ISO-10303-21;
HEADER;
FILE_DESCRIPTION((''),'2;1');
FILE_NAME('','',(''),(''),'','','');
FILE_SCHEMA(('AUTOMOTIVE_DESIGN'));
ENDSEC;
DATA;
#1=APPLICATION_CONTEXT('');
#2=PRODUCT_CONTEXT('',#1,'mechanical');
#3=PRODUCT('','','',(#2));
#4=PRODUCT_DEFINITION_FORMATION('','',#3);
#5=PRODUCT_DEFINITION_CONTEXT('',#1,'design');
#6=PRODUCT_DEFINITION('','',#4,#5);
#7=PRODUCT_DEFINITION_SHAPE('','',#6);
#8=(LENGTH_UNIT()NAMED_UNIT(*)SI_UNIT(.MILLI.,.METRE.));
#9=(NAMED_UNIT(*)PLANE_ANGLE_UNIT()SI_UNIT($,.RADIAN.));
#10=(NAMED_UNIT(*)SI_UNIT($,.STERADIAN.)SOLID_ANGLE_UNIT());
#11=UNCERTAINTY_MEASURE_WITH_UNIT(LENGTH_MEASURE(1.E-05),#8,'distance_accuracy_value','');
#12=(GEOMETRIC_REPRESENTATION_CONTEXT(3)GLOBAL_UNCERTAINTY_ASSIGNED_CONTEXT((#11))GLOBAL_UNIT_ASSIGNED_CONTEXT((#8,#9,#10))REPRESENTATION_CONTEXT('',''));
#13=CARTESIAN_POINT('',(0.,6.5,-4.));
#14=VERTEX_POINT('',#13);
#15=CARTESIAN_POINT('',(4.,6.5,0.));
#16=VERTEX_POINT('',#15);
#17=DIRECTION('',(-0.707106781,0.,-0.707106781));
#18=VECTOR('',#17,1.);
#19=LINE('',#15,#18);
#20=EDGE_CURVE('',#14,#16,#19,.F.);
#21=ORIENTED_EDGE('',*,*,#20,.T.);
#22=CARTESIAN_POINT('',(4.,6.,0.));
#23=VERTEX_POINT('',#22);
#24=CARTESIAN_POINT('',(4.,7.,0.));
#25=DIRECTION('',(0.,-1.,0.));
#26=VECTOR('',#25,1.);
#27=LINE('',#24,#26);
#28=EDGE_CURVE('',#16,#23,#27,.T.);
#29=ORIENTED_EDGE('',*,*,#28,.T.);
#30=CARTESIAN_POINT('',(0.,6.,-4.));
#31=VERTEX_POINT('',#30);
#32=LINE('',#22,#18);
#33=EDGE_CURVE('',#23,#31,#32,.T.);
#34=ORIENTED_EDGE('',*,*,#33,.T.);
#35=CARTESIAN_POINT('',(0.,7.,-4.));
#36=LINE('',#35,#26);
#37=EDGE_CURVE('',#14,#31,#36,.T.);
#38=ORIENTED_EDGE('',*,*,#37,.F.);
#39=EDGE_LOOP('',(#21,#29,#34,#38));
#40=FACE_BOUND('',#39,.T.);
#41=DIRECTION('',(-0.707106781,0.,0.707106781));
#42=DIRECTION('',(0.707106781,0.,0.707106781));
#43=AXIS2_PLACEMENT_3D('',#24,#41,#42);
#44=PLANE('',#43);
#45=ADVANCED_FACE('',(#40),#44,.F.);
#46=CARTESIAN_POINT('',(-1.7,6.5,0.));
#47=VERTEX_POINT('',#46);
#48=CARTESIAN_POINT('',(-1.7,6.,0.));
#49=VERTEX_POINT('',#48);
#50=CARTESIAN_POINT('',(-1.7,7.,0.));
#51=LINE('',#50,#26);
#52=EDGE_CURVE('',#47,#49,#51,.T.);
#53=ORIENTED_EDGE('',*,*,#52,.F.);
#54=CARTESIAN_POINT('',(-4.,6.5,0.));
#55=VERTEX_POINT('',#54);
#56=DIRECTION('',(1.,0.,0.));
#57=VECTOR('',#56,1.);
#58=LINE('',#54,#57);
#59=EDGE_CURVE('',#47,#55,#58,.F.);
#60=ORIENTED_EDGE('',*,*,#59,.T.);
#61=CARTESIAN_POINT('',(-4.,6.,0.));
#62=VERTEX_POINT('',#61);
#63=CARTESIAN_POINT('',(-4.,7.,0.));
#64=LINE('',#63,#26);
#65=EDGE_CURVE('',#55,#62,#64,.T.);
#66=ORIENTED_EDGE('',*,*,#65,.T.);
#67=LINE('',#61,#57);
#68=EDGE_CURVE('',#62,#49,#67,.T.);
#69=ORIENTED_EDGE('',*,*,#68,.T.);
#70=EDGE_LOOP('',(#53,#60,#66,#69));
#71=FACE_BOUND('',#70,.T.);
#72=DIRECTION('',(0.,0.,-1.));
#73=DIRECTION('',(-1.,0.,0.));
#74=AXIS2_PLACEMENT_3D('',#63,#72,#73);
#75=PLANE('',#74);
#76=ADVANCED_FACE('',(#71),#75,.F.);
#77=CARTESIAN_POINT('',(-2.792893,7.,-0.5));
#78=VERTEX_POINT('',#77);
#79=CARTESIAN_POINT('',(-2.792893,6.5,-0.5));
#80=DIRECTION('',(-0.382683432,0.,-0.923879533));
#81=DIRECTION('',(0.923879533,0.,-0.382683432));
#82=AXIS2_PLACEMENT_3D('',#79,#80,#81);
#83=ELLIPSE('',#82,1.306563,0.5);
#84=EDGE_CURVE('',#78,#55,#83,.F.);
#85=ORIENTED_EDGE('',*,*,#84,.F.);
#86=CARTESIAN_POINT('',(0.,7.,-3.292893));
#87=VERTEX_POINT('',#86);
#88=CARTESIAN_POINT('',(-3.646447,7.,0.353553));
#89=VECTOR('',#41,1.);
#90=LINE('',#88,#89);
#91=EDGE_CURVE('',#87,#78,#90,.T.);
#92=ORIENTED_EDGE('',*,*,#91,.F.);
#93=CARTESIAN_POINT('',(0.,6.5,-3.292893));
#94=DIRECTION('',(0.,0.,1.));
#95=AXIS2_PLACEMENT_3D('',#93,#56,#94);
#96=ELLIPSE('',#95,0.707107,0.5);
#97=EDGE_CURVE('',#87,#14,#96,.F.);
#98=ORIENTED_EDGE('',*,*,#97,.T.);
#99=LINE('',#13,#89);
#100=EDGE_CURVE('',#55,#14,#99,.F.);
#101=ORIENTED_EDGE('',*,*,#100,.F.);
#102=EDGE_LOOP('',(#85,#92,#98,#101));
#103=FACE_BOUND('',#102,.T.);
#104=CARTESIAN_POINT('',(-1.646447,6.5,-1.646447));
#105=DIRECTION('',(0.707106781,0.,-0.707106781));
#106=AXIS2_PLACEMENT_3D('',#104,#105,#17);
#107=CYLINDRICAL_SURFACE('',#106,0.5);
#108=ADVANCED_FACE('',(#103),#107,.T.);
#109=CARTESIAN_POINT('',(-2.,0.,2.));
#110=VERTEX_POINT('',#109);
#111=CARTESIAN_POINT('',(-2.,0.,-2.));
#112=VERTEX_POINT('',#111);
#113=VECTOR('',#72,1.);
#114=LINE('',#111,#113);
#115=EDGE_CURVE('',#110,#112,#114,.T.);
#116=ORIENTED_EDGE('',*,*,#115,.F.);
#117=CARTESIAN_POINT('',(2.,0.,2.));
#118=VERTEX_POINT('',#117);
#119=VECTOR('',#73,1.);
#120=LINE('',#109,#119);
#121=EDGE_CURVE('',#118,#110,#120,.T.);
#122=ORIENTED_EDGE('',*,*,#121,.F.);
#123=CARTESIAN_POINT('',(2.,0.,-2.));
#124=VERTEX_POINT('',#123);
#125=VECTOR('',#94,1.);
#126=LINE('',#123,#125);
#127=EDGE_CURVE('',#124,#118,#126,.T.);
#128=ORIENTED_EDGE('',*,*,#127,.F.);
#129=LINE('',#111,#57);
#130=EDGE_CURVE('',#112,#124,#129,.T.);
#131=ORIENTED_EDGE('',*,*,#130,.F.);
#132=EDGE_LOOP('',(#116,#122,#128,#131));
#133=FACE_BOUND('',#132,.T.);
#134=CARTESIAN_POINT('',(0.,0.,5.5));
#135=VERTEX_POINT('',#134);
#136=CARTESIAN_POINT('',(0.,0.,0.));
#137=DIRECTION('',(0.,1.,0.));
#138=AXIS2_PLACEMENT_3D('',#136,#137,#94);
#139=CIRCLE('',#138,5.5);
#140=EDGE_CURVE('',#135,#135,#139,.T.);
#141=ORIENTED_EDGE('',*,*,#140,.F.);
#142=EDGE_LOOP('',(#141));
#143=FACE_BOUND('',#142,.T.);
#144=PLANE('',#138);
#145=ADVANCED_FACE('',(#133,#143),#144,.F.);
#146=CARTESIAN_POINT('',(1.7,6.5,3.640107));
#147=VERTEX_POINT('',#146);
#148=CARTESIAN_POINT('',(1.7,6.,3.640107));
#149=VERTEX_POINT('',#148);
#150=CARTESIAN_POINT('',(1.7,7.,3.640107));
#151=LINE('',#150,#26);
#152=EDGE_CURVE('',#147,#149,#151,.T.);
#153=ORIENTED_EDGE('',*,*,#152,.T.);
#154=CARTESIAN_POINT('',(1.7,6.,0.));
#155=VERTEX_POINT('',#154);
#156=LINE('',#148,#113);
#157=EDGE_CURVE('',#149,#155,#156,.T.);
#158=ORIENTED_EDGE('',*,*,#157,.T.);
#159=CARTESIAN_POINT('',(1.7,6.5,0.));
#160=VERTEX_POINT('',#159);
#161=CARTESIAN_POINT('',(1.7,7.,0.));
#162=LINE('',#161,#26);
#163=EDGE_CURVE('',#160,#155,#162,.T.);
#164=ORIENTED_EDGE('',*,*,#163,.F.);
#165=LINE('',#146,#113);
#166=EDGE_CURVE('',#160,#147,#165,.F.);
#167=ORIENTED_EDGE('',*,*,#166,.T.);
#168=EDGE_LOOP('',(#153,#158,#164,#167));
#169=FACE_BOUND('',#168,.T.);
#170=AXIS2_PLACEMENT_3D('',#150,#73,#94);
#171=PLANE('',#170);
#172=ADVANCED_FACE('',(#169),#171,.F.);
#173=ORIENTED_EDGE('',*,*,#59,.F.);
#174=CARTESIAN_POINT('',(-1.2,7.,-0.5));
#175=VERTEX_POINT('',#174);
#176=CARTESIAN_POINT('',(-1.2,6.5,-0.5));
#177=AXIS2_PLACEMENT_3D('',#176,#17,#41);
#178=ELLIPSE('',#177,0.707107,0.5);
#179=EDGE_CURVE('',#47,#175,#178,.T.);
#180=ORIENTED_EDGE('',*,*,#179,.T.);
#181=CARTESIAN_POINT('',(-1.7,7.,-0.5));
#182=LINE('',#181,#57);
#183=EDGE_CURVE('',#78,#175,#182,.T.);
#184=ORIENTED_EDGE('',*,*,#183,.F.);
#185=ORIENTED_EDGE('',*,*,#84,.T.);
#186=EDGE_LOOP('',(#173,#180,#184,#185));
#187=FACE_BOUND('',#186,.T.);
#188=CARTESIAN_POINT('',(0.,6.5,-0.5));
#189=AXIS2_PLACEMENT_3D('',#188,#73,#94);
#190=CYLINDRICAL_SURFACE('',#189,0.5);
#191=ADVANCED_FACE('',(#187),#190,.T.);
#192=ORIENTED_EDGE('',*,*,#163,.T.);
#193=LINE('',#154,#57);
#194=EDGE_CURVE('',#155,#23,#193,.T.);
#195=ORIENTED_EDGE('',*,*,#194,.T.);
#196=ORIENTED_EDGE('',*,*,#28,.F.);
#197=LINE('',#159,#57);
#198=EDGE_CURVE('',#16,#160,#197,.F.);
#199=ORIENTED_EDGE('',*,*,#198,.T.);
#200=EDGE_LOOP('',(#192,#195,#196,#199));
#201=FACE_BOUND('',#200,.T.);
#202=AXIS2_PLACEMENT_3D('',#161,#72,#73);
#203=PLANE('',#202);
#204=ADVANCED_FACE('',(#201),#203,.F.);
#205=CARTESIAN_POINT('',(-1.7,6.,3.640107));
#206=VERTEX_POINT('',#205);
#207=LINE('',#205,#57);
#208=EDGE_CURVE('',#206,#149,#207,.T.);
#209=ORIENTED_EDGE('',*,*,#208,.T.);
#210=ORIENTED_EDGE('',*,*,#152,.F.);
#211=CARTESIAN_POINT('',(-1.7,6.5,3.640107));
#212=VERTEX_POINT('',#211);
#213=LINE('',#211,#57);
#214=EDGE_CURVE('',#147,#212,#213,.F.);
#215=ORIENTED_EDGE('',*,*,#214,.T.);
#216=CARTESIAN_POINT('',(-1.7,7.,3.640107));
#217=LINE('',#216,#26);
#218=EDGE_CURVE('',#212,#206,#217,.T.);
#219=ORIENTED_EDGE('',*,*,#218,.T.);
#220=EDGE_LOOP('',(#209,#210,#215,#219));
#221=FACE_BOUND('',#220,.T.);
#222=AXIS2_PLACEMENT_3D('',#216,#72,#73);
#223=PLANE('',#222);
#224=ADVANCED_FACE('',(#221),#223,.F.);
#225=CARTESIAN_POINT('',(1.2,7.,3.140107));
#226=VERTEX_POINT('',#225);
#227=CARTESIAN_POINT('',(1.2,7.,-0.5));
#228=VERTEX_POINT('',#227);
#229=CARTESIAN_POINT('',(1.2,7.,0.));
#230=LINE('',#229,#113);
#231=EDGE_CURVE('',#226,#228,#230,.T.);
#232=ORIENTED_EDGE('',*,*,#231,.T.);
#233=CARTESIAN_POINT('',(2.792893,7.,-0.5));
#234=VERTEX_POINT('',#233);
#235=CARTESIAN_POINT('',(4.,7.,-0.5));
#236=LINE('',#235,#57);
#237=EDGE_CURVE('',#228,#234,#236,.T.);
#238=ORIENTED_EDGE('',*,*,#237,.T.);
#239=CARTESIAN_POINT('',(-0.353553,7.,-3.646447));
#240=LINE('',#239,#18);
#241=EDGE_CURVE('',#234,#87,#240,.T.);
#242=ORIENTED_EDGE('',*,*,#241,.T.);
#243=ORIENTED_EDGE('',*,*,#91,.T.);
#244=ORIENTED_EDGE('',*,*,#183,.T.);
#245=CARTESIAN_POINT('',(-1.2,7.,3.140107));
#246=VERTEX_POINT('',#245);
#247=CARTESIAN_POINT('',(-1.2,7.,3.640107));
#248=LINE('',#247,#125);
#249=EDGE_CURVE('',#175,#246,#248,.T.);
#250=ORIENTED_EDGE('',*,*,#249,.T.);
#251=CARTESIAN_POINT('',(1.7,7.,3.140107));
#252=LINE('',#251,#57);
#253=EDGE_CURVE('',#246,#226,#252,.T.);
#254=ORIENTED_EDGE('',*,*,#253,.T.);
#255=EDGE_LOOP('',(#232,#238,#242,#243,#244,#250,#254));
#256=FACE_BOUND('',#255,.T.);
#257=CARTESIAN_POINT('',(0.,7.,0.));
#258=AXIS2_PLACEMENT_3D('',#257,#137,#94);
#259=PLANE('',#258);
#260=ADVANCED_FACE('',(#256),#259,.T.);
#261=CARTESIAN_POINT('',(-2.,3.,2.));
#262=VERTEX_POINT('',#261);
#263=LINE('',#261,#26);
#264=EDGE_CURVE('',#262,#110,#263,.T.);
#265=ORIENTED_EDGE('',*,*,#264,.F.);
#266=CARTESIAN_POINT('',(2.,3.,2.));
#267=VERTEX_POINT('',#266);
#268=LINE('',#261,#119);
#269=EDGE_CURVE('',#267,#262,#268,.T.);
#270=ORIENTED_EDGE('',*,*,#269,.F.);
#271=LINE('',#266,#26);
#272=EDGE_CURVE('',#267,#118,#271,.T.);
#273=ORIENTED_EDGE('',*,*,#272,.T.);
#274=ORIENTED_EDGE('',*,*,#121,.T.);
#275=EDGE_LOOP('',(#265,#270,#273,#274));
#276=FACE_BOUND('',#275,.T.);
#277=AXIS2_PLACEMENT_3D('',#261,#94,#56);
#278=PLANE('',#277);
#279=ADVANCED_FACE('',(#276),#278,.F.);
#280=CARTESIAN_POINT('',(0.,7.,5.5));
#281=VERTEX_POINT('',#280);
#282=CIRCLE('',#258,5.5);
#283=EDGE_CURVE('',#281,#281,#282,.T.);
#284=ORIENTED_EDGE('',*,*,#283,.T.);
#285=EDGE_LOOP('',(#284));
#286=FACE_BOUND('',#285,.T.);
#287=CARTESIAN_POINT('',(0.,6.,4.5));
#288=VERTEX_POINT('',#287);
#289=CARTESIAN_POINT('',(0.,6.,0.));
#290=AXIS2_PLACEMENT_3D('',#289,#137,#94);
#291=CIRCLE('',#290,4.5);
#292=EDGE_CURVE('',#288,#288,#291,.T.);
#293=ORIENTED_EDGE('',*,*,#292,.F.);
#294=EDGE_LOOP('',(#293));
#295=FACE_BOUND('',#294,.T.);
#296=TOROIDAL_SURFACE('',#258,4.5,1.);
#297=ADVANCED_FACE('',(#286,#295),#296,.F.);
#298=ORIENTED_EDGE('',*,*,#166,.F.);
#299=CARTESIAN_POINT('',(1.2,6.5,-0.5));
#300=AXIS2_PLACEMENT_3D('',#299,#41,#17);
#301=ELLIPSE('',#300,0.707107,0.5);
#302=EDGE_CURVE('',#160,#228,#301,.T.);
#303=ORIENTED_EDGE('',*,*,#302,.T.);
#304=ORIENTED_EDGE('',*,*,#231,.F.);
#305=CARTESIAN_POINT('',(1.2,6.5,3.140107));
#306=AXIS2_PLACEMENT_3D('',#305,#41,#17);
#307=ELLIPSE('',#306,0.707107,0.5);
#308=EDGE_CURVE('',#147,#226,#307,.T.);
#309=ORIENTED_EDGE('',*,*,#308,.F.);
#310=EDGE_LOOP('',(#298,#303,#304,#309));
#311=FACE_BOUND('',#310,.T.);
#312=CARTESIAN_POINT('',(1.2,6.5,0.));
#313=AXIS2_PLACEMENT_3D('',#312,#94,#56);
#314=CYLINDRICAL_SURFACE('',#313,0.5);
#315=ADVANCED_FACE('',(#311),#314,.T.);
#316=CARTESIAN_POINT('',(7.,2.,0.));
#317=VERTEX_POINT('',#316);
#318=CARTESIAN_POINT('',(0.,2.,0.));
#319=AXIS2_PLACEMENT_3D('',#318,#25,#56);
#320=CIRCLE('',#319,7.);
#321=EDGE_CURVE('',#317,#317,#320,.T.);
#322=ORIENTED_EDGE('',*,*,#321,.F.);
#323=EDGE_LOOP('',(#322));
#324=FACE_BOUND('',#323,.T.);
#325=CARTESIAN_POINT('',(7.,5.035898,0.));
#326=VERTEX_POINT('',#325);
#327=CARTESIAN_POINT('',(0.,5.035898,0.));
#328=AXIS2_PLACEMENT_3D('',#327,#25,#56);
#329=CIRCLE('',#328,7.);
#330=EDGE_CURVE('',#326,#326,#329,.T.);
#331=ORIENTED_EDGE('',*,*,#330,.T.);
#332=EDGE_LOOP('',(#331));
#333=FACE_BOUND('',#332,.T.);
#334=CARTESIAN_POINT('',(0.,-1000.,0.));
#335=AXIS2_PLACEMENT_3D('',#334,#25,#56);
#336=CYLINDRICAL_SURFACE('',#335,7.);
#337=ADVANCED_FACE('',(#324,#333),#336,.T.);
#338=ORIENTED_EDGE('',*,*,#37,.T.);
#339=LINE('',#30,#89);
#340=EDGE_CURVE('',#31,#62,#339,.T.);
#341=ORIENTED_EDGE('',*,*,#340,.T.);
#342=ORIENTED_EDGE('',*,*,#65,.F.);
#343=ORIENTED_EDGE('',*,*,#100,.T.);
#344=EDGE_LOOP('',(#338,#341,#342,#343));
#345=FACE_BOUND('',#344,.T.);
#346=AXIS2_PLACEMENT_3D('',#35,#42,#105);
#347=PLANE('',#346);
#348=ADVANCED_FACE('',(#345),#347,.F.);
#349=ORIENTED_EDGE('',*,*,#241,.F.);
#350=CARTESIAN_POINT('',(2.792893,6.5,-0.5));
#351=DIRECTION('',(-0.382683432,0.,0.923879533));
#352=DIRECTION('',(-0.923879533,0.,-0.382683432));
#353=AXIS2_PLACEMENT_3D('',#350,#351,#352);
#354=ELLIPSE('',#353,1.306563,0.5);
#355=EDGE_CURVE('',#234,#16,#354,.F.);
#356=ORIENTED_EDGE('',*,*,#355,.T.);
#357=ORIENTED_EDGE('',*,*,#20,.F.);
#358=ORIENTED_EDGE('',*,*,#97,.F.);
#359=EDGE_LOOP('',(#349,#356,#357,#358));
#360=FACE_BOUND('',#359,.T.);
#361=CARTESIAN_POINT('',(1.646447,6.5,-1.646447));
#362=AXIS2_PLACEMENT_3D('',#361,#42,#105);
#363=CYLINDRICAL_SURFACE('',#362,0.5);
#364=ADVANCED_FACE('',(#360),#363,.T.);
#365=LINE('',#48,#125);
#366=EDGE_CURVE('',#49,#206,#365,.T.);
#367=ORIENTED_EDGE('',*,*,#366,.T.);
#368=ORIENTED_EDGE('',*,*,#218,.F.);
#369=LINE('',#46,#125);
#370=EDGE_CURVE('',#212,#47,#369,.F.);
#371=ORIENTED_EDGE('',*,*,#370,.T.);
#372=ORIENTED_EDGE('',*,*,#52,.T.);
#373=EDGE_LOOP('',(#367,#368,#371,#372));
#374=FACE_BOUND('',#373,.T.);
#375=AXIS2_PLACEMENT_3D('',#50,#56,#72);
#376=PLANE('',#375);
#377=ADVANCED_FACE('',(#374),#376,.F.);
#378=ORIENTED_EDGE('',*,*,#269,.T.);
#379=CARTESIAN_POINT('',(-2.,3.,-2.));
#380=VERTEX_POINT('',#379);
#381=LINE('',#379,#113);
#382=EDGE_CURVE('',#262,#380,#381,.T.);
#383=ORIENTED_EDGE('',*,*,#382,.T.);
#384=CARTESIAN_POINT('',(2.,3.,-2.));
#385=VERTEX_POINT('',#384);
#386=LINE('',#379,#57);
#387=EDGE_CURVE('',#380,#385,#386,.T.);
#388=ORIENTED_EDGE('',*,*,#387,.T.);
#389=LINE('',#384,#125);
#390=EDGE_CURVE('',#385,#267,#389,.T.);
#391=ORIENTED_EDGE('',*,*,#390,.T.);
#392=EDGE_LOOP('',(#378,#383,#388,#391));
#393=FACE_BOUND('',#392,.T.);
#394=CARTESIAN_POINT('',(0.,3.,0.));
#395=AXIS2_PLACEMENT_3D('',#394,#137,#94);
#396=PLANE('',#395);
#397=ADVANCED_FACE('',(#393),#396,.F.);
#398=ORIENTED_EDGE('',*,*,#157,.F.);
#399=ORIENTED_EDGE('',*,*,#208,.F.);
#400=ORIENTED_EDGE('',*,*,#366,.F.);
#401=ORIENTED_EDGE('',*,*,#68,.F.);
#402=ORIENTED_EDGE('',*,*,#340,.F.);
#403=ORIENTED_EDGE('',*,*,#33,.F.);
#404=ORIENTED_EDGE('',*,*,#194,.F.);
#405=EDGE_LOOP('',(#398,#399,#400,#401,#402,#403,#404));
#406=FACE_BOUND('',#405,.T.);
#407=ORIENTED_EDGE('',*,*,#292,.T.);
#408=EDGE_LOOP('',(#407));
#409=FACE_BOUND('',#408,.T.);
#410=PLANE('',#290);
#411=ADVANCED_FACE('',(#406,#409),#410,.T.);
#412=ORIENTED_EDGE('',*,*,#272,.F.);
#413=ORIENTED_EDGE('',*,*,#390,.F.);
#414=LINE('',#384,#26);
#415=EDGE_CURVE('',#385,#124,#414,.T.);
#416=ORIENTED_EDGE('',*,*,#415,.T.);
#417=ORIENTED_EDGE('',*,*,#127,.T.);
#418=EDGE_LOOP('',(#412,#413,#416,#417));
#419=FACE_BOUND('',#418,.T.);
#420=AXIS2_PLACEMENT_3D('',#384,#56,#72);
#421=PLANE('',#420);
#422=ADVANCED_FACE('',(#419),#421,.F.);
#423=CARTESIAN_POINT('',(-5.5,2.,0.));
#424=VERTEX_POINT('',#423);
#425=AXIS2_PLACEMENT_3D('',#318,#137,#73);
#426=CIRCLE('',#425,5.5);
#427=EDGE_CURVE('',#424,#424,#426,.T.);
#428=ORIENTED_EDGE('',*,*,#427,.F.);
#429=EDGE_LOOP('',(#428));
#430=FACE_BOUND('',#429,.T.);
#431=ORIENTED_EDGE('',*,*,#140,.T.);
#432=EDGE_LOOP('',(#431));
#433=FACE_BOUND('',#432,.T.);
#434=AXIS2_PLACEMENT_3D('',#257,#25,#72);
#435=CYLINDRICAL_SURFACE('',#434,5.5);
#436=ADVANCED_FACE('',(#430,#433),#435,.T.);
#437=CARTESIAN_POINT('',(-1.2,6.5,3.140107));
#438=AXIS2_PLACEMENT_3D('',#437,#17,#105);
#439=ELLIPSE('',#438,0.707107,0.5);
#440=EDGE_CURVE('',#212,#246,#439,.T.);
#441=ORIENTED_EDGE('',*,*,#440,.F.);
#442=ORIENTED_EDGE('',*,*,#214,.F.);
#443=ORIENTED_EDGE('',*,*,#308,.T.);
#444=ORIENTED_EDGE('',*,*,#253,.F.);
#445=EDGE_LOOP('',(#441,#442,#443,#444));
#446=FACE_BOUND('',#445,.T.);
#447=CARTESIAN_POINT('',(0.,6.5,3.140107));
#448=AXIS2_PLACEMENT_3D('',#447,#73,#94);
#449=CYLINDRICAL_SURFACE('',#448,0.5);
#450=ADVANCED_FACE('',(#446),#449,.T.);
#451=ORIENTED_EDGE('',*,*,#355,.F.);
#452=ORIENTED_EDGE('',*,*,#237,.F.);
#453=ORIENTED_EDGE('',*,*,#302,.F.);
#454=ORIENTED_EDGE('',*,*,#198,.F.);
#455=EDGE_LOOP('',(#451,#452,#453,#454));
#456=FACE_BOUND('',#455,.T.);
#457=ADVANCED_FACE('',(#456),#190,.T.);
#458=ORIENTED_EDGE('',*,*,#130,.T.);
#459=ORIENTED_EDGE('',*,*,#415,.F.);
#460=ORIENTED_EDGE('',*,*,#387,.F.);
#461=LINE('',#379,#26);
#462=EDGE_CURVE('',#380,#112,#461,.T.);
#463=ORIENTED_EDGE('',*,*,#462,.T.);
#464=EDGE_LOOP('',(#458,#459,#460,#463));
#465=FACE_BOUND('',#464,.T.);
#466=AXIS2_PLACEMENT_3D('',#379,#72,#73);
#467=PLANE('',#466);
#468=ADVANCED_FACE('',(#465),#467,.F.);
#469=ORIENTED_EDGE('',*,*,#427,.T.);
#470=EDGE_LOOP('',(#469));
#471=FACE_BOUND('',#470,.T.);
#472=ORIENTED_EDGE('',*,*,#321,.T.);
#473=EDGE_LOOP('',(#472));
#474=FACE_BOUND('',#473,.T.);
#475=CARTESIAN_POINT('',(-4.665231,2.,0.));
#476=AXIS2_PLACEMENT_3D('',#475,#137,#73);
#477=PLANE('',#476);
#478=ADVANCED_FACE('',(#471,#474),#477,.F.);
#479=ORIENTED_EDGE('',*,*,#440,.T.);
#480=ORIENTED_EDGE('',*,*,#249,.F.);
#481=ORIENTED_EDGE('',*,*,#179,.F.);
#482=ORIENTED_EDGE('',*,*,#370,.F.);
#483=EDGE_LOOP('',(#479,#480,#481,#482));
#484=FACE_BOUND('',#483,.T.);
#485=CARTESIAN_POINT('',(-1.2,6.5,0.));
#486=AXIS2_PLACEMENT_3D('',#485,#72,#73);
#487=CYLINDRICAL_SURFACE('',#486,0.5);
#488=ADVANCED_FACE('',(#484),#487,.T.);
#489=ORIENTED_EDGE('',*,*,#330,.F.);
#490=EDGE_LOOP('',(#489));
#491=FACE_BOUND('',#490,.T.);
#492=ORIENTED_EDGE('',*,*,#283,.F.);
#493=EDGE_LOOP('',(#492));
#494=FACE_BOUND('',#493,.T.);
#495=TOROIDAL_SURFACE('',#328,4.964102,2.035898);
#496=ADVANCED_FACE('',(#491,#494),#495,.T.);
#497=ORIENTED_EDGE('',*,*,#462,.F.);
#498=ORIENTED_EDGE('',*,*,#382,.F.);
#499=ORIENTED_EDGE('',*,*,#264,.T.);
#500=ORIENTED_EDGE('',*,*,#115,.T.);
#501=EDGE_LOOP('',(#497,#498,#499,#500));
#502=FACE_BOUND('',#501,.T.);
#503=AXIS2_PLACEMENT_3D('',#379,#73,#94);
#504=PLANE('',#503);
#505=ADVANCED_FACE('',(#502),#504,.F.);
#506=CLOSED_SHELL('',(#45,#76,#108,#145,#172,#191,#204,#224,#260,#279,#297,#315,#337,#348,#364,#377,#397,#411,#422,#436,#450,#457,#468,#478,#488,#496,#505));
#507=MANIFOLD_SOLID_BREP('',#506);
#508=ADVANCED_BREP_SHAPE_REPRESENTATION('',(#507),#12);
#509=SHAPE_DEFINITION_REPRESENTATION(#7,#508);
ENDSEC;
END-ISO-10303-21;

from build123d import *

# Parameters (mm, degrees)
SKETCH_1_R          = 5.5
EXTRUDE_1_DEPTH     = 7
CUT_EXTRUDE_START   = -1
SKETCH_2_R          = 5.5
CUT_EXTRUDE_1_DEPTH = 1
EXTRUDE_2_DEPTH     = 1
SKETCH_5_W          = 4
SKETCH_5_H          = 4
CUT_EXTRUDE_2_DEPTH = 3
FILLET_3_R          = 1
FILLET_4_R          = 0.5


with BuildPart() as part:
    # Эскиз1 → Бобышка-Вытянуть1 (new body)
    with BuildSketch(Plane(origin=(0, 0, 0), x_dir=(1, 0, 0), z_dir=(0, 1, 0))):
        with Locations(Location((0, 0, 0), (0, 0, 270))):
            Circle(SKETCH_1_R)
    extrude(amount=EXTRUDE_1_DEPTH)

    # Эскиз6 → Повернуть3 (revolve)
    with BuildSketch(Plane.XY, mode=Mode.PRIVATE) as revolve_3_sk:
        with BuildLine():
            Line((-4.665230635, 2), (-7, 2))
            Line((-7, 2), (-7, 3))
            Line((-7, 3), (-7, 5.035898385))
            ThreePointArc((-7, 5.035898385), (-6.582112259, 6.271585962), (-5.5, 7))
            Line((-5.5, 7), (-4.665230635, 7))
            Line((-4.665230635, 7), (-4.665230635, 3))
            Line((-4.665230635, 3), (-4.665230635, 2))
        make_face()
    revolve(revolve_3_sk.sketch.rotate(Axis((0, -1000, 0), (0, 1, 0)), 180), axis=Axis((0, -1000, 0), (0, 1, 0)))

    # Эскиз2 → Вырез-Вытянуть1 (cut)
    with BuildSketch(Plane(origin=(0, 7, 0), x_dir=(1, 0, 0), z_dir=(0, 1, 0)).offset(CUT_EXTRUDE_START)):
        with Locations(Location((0, 0, 0), (0, 0, 180))):
            Circle(SKETCH_2_R)
    extrude(amount=CUT_EXTRUDE_1_DEPTH, mode=Mode.SUBTRACT)

    # Эскиз3 → Бобышка-Вытянуть2 (add)
    with BuildSketch(Plane(origin=(0, 6, 0), x_dir=(1, 0, 0), z_dir=(0, 1, 0))):
        Polygon((0, 4), (-4, 0), (-1.7, 0), (-1.7, -3.640107036), (1.7, -3.640107036), (1.7, 0), (4, 0), align=None)
    extrude(amount=EXTRUDE_2_DEPTH)

    # Эскиз5 → Вырез-Вытянуть2 (cut)
    with BuildSketch(Plane.XZ):
        Rectangle(SKETCH_5_W, SKETCH_5_H)
    extrude(amount=-CUT_EXTRUDE_2_DEPTH, mode=Mode.SUBTRACT)

    # Скругление3
    fillet_3_edges = [part.edges().sort_by_distance(p)[0] for p in [
        (5.5, 6, 0),
    ]]
    fillet(fillet_3_edges, radius=FILLET_3_R - 0.0001)  # a hair under: the kernel refuses the full size

    # Скругление4
    fillet_4_edges = [part.edges().sort_by_distance(p)[0] for p in [
        (2, 7, -2),
        (-2, 7, -2),
        (-2.85, 7, 0),
        (-1.7, 7, 1.820053518),
        (0, 7, 3.640107036),
        (1.7, 7, 1.820053518),
        (2.85, 7, 0),
    ]]
    fillet(fillet_4_edges, radius=FILLET_4_R)


solid = part.part
